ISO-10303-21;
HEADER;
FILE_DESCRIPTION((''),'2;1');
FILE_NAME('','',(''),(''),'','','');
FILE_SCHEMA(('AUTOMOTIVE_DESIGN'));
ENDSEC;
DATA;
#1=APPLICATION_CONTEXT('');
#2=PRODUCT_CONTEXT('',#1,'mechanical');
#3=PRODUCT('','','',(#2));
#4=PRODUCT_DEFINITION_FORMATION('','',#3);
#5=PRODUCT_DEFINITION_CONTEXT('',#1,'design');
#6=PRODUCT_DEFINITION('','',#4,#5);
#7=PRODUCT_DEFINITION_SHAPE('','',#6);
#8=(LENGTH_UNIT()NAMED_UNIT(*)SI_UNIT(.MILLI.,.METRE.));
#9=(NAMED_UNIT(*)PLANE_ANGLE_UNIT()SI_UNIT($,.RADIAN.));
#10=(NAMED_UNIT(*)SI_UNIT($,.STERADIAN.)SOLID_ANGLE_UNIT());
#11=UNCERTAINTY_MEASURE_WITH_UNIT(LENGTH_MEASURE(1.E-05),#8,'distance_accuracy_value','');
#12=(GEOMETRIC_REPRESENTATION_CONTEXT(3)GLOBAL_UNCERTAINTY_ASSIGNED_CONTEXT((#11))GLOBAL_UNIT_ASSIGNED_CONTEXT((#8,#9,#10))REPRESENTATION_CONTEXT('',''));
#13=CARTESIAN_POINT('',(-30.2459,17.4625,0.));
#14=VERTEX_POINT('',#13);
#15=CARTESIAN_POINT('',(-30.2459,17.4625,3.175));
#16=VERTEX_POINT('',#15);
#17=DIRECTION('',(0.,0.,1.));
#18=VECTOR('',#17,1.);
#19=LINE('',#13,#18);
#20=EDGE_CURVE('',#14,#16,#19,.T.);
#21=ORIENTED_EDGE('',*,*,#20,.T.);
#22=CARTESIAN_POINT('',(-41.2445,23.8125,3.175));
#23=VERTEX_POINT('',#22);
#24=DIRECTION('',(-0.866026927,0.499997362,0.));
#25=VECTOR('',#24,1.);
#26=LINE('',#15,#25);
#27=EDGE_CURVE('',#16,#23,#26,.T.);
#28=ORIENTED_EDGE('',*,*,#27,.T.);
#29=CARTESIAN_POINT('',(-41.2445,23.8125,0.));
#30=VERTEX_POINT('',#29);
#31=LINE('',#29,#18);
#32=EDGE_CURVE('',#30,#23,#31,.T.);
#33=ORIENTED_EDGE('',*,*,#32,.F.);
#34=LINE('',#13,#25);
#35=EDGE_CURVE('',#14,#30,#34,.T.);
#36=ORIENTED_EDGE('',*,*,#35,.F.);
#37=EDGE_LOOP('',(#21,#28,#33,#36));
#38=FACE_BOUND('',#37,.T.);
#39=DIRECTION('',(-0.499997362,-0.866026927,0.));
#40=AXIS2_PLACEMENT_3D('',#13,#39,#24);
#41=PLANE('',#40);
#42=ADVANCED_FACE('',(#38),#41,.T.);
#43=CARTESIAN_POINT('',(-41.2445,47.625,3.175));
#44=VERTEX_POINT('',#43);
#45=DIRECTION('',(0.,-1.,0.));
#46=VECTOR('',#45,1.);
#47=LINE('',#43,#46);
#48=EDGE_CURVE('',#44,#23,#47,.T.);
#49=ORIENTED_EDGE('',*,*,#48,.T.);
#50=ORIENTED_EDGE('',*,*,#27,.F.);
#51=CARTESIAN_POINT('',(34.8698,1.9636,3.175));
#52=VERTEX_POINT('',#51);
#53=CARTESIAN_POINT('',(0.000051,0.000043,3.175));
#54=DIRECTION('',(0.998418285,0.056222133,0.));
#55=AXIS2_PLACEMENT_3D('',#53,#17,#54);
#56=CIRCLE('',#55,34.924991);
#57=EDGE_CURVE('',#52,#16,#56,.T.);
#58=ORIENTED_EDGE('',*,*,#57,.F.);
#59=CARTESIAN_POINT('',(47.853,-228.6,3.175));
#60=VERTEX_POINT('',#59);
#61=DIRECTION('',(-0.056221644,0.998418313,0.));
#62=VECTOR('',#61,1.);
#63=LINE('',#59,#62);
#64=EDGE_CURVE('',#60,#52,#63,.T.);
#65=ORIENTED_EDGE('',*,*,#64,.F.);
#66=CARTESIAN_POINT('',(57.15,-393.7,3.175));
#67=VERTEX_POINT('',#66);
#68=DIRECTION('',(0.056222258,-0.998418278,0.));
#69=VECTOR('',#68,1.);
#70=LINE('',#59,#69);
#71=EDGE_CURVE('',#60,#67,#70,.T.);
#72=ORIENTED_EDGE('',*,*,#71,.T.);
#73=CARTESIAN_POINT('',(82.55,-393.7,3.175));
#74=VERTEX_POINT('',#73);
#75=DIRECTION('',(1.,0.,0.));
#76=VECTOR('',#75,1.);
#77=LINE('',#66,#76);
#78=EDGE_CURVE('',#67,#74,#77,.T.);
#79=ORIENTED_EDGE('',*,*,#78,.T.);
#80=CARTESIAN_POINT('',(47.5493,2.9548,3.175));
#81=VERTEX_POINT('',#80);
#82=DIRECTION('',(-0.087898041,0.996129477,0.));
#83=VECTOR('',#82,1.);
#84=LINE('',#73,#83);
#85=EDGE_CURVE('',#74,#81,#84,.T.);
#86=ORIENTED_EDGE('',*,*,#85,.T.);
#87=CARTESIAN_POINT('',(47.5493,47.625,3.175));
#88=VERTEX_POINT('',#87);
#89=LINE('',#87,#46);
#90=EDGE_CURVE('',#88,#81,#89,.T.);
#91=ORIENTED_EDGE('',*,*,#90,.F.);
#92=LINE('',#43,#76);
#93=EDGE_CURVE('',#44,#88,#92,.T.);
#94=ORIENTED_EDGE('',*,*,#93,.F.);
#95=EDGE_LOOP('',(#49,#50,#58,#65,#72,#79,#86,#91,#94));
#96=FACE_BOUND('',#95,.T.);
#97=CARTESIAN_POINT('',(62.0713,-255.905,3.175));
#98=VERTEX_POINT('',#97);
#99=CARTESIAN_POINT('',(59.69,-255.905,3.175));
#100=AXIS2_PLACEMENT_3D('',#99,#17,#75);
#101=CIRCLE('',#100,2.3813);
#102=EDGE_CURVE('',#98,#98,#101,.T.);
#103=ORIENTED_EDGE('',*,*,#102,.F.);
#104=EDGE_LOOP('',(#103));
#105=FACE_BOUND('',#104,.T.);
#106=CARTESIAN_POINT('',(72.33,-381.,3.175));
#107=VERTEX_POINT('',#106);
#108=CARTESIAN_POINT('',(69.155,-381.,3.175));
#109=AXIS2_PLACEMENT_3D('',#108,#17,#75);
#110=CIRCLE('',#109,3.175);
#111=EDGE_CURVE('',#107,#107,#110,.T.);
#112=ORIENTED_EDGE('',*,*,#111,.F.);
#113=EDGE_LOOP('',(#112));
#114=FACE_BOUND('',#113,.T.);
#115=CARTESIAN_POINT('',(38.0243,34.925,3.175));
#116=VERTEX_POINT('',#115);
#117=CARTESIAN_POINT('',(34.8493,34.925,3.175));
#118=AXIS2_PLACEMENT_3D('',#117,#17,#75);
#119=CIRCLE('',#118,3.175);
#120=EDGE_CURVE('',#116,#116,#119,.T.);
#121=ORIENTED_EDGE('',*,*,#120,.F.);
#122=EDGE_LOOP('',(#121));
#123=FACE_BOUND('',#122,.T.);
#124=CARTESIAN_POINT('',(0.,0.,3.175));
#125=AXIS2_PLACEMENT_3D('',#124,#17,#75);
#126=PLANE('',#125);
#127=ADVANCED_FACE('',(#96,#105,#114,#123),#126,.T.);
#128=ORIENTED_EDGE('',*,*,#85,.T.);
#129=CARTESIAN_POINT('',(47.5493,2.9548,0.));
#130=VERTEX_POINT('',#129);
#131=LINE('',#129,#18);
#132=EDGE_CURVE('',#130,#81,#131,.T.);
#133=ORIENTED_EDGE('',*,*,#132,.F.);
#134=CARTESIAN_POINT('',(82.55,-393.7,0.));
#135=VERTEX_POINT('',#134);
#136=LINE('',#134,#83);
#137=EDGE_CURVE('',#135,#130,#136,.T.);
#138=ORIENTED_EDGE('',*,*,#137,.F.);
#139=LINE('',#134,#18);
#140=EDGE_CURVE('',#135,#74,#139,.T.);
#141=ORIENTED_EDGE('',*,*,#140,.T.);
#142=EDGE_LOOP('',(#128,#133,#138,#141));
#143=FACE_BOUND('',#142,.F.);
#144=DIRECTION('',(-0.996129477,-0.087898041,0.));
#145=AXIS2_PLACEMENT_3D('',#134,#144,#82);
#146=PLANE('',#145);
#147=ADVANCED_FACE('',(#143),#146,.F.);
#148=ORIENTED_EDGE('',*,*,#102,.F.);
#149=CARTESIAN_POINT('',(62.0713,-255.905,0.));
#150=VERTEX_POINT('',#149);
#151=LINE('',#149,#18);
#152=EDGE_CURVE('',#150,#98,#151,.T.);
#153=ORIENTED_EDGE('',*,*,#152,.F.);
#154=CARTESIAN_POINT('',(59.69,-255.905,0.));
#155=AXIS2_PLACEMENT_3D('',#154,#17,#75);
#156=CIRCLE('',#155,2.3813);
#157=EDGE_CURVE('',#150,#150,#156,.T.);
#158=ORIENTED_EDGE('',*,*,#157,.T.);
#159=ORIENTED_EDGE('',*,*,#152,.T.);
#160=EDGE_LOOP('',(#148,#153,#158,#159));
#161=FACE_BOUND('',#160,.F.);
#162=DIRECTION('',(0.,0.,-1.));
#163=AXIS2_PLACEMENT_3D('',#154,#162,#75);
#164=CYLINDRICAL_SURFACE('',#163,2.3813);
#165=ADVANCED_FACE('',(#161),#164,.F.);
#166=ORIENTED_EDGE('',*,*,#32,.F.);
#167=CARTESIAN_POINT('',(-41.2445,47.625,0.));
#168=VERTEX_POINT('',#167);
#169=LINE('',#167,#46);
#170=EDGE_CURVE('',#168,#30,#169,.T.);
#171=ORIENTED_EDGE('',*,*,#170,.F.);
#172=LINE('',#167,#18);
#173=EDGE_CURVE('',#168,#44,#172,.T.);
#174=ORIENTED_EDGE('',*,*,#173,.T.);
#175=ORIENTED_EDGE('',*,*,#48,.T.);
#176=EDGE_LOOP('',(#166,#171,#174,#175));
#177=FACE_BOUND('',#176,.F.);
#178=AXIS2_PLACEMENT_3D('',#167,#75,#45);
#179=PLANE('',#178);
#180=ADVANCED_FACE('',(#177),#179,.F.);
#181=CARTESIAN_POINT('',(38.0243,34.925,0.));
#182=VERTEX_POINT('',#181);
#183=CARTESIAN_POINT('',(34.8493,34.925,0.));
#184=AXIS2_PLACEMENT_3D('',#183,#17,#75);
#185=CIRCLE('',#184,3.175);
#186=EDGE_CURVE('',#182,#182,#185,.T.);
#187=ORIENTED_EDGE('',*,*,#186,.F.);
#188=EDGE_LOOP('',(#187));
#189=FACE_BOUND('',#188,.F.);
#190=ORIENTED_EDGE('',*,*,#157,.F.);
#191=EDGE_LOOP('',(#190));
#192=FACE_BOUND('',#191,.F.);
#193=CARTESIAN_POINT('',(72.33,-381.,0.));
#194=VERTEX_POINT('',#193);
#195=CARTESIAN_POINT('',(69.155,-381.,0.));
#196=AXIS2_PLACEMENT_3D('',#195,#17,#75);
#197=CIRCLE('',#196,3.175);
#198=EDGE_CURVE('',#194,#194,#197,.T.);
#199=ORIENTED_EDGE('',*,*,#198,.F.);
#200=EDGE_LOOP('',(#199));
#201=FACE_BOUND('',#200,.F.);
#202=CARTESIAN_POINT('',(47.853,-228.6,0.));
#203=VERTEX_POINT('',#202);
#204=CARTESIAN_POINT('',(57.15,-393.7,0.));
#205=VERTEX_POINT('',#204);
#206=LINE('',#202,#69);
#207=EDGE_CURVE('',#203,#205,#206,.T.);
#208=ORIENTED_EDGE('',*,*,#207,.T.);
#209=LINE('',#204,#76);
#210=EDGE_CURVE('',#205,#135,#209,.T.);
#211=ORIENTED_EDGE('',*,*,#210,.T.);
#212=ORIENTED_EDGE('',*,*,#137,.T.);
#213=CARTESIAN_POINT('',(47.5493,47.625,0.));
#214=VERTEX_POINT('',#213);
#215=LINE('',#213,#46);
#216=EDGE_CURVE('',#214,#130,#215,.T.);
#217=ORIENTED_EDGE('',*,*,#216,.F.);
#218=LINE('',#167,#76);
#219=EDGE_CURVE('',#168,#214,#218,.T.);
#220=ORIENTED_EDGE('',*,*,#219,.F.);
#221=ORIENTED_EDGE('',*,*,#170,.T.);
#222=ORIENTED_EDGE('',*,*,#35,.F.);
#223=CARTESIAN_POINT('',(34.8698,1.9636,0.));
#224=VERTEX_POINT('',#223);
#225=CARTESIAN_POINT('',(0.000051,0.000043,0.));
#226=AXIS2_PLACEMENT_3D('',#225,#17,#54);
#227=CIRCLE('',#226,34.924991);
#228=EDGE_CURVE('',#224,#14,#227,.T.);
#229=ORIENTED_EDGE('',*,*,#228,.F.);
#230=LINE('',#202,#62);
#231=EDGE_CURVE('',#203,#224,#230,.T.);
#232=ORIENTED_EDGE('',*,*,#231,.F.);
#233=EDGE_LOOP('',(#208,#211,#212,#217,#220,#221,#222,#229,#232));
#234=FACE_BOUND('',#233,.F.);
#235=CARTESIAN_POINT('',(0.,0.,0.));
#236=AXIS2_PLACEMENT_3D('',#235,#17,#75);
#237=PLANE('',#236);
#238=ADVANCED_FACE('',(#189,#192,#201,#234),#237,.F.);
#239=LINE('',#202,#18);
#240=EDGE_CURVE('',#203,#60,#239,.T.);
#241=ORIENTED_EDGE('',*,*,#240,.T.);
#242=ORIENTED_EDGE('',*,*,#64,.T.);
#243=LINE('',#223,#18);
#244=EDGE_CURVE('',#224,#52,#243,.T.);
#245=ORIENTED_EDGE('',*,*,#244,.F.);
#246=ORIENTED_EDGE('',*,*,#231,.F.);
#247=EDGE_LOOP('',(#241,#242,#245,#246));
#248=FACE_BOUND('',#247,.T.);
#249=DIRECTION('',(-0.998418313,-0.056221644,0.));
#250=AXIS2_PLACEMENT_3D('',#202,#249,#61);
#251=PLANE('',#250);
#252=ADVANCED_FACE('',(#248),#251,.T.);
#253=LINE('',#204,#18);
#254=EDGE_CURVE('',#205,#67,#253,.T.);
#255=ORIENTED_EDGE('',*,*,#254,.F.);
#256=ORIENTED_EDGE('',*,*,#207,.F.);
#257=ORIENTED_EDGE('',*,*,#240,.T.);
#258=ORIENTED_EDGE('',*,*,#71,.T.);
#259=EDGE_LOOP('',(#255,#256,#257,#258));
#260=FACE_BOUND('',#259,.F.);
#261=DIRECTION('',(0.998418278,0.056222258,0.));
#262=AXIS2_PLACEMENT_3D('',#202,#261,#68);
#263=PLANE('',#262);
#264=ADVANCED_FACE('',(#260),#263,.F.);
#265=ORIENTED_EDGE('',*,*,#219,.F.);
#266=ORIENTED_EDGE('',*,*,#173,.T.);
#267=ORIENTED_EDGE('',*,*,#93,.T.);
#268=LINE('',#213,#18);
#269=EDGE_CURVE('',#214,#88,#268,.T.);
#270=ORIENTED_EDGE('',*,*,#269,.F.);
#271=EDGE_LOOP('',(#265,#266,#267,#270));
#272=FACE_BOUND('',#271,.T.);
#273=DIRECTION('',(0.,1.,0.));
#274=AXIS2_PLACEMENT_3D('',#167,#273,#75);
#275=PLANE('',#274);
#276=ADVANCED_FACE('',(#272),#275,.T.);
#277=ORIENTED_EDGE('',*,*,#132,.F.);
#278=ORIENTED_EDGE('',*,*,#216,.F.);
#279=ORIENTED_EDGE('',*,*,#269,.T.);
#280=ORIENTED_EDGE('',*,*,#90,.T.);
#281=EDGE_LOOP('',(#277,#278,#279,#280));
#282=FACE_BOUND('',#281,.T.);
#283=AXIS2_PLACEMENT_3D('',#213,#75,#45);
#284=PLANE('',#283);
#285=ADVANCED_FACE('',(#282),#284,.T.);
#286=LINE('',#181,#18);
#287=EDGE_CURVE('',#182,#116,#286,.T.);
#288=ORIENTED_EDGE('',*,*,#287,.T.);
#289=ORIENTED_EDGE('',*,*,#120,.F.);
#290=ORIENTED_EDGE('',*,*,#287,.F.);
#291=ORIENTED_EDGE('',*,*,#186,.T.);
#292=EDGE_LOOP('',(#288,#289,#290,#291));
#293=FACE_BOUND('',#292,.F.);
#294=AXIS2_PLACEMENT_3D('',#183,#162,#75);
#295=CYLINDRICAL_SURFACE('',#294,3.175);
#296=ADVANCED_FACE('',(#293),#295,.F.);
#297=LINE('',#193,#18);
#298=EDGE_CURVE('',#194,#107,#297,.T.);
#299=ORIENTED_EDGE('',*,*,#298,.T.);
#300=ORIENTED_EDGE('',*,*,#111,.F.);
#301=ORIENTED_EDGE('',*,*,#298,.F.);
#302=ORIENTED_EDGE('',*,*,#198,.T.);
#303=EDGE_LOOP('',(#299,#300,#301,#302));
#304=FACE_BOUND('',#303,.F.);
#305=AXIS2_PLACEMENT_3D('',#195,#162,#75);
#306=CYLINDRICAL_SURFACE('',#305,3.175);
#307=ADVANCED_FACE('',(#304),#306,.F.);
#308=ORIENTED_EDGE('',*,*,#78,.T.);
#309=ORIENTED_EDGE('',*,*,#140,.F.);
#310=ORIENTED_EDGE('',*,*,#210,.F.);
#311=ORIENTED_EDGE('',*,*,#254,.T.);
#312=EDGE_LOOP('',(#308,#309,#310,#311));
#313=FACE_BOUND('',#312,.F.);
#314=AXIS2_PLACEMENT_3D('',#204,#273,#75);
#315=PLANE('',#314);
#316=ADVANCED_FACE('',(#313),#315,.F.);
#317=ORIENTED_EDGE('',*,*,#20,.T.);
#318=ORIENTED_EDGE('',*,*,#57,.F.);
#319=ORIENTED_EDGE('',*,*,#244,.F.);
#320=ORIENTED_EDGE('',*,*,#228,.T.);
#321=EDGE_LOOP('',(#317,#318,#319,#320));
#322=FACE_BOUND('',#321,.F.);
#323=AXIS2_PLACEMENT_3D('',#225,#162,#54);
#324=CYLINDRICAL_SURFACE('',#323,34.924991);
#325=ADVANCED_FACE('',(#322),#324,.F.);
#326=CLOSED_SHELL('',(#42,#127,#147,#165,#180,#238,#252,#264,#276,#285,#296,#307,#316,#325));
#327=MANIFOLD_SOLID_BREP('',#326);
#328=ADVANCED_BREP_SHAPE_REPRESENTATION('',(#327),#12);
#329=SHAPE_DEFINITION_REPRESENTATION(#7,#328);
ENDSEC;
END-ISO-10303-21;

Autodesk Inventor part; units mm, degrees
ref_plane "YZ Plane" through (0, 0, 0) normal (1, 0, 0) x (0, 1, 0)
ref_plane "XZ Plane" through (0, 0, 0) normal (0, 1, 0) x (-1, 0, 0)
ref_plane "XY Plane" through (0, 0, 0) normal (0, 0, 1) x (1, 0, 0)
sketch "Sketch1" plane through (0, 0, 0) normal (0, 0, 1) x (1, 0, 0)
  arc A0 (34.8698, 1.9636) -> (-30.2459, 17.4625) centre (0, 0) ccw
  line L0 (-30.2459, 17.4625) -> (-41.2445, 23.8125)
  line L1 (0, 0) -> (-58.2409, 0) construction
  line L2 (47.853, -228.6) -> (34.8698, 1.9636)
  line L3 (82.55, -393.7) -> (47.4407, 4.1861)
  line L4 (57.15, -393.7) -> (82.55, -393.7)
  circle A1 centre (69.155, -381) radius 3.175
  line L5 (47.5493, 47.625) -> (47.5493, 2.9548)
  line L6 (-41.2445, 47.625) -> (-41.2445, 23.8125)
  line L7 (-41.2445, 47.625) -> (161.9555, 47.625) construction
  line L8 (-41.2445, 47.625) -> (161.9555, 47.625) construction
  line L9 (-41.2445, 47.625) -> (161.9555, 47.625) construction
  line L10 (-41.2445, 47.625) -> (161.9555, 47.625) construction
  line L11 (-41.2445, 47.625) -> (47.5493, 47.625)
  line L12 (47.853, -228.6) -> (57.15, -393.7)
  circle A2 centre (59.69, -255.905) radius 2.3813
  circle A3 centre (34.8493, 34.925) radius 3.175
  point P0 (47.5493, 25.2899)
  point P1 (51.4288, -292.1)
  dimension "d0" = 69.85
  dimension "d1" = 30
  dimension "d2" = 57.15
  dimension "d3" = 25.4
  dimension "d4" = 393.7
  dimension "d5" = 6.35
  dimension "d6" = 12.7
  dimension "d7" = 12.7
  dimension "d72" = 4.7625
  dimension "d73" = 2.54
  dimension "d74" = 137.795
  dimension "d76" = 6.35
  dimension "d77" = 12.7
  dimension "d78" = 12.7
extrude "Plate10" add sketch "Sketch1" along normal blind 3.175
equation "\"BendRadius\" = Thickness"
equation "\"BendReliefWidth\" = Thickness"
equation "\"BendReliefDepth\" = 0.5 * Thickness"
equation "\"CornerReliefSize\" = 4 * Thickness"
equation "\"MinimumRemnant\" = 2 * Thickness"
equation "\"TransitionRadius\" = BendRadius"
equation "\"JacobiRadiusSize\" = BendRadius"
equation "\"GapSize\" = Thickness"
equation "\"d10\" = BendRadius"
equation "\"d28\" = BendRadius"
equation "\"d71\" = BendRadius"
equation "\"d75\" = BendRadius"
equation "\"d79\" = BendRadius"
equation "\"Thickness\" = 3.175"
properties part number "PassiveHooks2"
